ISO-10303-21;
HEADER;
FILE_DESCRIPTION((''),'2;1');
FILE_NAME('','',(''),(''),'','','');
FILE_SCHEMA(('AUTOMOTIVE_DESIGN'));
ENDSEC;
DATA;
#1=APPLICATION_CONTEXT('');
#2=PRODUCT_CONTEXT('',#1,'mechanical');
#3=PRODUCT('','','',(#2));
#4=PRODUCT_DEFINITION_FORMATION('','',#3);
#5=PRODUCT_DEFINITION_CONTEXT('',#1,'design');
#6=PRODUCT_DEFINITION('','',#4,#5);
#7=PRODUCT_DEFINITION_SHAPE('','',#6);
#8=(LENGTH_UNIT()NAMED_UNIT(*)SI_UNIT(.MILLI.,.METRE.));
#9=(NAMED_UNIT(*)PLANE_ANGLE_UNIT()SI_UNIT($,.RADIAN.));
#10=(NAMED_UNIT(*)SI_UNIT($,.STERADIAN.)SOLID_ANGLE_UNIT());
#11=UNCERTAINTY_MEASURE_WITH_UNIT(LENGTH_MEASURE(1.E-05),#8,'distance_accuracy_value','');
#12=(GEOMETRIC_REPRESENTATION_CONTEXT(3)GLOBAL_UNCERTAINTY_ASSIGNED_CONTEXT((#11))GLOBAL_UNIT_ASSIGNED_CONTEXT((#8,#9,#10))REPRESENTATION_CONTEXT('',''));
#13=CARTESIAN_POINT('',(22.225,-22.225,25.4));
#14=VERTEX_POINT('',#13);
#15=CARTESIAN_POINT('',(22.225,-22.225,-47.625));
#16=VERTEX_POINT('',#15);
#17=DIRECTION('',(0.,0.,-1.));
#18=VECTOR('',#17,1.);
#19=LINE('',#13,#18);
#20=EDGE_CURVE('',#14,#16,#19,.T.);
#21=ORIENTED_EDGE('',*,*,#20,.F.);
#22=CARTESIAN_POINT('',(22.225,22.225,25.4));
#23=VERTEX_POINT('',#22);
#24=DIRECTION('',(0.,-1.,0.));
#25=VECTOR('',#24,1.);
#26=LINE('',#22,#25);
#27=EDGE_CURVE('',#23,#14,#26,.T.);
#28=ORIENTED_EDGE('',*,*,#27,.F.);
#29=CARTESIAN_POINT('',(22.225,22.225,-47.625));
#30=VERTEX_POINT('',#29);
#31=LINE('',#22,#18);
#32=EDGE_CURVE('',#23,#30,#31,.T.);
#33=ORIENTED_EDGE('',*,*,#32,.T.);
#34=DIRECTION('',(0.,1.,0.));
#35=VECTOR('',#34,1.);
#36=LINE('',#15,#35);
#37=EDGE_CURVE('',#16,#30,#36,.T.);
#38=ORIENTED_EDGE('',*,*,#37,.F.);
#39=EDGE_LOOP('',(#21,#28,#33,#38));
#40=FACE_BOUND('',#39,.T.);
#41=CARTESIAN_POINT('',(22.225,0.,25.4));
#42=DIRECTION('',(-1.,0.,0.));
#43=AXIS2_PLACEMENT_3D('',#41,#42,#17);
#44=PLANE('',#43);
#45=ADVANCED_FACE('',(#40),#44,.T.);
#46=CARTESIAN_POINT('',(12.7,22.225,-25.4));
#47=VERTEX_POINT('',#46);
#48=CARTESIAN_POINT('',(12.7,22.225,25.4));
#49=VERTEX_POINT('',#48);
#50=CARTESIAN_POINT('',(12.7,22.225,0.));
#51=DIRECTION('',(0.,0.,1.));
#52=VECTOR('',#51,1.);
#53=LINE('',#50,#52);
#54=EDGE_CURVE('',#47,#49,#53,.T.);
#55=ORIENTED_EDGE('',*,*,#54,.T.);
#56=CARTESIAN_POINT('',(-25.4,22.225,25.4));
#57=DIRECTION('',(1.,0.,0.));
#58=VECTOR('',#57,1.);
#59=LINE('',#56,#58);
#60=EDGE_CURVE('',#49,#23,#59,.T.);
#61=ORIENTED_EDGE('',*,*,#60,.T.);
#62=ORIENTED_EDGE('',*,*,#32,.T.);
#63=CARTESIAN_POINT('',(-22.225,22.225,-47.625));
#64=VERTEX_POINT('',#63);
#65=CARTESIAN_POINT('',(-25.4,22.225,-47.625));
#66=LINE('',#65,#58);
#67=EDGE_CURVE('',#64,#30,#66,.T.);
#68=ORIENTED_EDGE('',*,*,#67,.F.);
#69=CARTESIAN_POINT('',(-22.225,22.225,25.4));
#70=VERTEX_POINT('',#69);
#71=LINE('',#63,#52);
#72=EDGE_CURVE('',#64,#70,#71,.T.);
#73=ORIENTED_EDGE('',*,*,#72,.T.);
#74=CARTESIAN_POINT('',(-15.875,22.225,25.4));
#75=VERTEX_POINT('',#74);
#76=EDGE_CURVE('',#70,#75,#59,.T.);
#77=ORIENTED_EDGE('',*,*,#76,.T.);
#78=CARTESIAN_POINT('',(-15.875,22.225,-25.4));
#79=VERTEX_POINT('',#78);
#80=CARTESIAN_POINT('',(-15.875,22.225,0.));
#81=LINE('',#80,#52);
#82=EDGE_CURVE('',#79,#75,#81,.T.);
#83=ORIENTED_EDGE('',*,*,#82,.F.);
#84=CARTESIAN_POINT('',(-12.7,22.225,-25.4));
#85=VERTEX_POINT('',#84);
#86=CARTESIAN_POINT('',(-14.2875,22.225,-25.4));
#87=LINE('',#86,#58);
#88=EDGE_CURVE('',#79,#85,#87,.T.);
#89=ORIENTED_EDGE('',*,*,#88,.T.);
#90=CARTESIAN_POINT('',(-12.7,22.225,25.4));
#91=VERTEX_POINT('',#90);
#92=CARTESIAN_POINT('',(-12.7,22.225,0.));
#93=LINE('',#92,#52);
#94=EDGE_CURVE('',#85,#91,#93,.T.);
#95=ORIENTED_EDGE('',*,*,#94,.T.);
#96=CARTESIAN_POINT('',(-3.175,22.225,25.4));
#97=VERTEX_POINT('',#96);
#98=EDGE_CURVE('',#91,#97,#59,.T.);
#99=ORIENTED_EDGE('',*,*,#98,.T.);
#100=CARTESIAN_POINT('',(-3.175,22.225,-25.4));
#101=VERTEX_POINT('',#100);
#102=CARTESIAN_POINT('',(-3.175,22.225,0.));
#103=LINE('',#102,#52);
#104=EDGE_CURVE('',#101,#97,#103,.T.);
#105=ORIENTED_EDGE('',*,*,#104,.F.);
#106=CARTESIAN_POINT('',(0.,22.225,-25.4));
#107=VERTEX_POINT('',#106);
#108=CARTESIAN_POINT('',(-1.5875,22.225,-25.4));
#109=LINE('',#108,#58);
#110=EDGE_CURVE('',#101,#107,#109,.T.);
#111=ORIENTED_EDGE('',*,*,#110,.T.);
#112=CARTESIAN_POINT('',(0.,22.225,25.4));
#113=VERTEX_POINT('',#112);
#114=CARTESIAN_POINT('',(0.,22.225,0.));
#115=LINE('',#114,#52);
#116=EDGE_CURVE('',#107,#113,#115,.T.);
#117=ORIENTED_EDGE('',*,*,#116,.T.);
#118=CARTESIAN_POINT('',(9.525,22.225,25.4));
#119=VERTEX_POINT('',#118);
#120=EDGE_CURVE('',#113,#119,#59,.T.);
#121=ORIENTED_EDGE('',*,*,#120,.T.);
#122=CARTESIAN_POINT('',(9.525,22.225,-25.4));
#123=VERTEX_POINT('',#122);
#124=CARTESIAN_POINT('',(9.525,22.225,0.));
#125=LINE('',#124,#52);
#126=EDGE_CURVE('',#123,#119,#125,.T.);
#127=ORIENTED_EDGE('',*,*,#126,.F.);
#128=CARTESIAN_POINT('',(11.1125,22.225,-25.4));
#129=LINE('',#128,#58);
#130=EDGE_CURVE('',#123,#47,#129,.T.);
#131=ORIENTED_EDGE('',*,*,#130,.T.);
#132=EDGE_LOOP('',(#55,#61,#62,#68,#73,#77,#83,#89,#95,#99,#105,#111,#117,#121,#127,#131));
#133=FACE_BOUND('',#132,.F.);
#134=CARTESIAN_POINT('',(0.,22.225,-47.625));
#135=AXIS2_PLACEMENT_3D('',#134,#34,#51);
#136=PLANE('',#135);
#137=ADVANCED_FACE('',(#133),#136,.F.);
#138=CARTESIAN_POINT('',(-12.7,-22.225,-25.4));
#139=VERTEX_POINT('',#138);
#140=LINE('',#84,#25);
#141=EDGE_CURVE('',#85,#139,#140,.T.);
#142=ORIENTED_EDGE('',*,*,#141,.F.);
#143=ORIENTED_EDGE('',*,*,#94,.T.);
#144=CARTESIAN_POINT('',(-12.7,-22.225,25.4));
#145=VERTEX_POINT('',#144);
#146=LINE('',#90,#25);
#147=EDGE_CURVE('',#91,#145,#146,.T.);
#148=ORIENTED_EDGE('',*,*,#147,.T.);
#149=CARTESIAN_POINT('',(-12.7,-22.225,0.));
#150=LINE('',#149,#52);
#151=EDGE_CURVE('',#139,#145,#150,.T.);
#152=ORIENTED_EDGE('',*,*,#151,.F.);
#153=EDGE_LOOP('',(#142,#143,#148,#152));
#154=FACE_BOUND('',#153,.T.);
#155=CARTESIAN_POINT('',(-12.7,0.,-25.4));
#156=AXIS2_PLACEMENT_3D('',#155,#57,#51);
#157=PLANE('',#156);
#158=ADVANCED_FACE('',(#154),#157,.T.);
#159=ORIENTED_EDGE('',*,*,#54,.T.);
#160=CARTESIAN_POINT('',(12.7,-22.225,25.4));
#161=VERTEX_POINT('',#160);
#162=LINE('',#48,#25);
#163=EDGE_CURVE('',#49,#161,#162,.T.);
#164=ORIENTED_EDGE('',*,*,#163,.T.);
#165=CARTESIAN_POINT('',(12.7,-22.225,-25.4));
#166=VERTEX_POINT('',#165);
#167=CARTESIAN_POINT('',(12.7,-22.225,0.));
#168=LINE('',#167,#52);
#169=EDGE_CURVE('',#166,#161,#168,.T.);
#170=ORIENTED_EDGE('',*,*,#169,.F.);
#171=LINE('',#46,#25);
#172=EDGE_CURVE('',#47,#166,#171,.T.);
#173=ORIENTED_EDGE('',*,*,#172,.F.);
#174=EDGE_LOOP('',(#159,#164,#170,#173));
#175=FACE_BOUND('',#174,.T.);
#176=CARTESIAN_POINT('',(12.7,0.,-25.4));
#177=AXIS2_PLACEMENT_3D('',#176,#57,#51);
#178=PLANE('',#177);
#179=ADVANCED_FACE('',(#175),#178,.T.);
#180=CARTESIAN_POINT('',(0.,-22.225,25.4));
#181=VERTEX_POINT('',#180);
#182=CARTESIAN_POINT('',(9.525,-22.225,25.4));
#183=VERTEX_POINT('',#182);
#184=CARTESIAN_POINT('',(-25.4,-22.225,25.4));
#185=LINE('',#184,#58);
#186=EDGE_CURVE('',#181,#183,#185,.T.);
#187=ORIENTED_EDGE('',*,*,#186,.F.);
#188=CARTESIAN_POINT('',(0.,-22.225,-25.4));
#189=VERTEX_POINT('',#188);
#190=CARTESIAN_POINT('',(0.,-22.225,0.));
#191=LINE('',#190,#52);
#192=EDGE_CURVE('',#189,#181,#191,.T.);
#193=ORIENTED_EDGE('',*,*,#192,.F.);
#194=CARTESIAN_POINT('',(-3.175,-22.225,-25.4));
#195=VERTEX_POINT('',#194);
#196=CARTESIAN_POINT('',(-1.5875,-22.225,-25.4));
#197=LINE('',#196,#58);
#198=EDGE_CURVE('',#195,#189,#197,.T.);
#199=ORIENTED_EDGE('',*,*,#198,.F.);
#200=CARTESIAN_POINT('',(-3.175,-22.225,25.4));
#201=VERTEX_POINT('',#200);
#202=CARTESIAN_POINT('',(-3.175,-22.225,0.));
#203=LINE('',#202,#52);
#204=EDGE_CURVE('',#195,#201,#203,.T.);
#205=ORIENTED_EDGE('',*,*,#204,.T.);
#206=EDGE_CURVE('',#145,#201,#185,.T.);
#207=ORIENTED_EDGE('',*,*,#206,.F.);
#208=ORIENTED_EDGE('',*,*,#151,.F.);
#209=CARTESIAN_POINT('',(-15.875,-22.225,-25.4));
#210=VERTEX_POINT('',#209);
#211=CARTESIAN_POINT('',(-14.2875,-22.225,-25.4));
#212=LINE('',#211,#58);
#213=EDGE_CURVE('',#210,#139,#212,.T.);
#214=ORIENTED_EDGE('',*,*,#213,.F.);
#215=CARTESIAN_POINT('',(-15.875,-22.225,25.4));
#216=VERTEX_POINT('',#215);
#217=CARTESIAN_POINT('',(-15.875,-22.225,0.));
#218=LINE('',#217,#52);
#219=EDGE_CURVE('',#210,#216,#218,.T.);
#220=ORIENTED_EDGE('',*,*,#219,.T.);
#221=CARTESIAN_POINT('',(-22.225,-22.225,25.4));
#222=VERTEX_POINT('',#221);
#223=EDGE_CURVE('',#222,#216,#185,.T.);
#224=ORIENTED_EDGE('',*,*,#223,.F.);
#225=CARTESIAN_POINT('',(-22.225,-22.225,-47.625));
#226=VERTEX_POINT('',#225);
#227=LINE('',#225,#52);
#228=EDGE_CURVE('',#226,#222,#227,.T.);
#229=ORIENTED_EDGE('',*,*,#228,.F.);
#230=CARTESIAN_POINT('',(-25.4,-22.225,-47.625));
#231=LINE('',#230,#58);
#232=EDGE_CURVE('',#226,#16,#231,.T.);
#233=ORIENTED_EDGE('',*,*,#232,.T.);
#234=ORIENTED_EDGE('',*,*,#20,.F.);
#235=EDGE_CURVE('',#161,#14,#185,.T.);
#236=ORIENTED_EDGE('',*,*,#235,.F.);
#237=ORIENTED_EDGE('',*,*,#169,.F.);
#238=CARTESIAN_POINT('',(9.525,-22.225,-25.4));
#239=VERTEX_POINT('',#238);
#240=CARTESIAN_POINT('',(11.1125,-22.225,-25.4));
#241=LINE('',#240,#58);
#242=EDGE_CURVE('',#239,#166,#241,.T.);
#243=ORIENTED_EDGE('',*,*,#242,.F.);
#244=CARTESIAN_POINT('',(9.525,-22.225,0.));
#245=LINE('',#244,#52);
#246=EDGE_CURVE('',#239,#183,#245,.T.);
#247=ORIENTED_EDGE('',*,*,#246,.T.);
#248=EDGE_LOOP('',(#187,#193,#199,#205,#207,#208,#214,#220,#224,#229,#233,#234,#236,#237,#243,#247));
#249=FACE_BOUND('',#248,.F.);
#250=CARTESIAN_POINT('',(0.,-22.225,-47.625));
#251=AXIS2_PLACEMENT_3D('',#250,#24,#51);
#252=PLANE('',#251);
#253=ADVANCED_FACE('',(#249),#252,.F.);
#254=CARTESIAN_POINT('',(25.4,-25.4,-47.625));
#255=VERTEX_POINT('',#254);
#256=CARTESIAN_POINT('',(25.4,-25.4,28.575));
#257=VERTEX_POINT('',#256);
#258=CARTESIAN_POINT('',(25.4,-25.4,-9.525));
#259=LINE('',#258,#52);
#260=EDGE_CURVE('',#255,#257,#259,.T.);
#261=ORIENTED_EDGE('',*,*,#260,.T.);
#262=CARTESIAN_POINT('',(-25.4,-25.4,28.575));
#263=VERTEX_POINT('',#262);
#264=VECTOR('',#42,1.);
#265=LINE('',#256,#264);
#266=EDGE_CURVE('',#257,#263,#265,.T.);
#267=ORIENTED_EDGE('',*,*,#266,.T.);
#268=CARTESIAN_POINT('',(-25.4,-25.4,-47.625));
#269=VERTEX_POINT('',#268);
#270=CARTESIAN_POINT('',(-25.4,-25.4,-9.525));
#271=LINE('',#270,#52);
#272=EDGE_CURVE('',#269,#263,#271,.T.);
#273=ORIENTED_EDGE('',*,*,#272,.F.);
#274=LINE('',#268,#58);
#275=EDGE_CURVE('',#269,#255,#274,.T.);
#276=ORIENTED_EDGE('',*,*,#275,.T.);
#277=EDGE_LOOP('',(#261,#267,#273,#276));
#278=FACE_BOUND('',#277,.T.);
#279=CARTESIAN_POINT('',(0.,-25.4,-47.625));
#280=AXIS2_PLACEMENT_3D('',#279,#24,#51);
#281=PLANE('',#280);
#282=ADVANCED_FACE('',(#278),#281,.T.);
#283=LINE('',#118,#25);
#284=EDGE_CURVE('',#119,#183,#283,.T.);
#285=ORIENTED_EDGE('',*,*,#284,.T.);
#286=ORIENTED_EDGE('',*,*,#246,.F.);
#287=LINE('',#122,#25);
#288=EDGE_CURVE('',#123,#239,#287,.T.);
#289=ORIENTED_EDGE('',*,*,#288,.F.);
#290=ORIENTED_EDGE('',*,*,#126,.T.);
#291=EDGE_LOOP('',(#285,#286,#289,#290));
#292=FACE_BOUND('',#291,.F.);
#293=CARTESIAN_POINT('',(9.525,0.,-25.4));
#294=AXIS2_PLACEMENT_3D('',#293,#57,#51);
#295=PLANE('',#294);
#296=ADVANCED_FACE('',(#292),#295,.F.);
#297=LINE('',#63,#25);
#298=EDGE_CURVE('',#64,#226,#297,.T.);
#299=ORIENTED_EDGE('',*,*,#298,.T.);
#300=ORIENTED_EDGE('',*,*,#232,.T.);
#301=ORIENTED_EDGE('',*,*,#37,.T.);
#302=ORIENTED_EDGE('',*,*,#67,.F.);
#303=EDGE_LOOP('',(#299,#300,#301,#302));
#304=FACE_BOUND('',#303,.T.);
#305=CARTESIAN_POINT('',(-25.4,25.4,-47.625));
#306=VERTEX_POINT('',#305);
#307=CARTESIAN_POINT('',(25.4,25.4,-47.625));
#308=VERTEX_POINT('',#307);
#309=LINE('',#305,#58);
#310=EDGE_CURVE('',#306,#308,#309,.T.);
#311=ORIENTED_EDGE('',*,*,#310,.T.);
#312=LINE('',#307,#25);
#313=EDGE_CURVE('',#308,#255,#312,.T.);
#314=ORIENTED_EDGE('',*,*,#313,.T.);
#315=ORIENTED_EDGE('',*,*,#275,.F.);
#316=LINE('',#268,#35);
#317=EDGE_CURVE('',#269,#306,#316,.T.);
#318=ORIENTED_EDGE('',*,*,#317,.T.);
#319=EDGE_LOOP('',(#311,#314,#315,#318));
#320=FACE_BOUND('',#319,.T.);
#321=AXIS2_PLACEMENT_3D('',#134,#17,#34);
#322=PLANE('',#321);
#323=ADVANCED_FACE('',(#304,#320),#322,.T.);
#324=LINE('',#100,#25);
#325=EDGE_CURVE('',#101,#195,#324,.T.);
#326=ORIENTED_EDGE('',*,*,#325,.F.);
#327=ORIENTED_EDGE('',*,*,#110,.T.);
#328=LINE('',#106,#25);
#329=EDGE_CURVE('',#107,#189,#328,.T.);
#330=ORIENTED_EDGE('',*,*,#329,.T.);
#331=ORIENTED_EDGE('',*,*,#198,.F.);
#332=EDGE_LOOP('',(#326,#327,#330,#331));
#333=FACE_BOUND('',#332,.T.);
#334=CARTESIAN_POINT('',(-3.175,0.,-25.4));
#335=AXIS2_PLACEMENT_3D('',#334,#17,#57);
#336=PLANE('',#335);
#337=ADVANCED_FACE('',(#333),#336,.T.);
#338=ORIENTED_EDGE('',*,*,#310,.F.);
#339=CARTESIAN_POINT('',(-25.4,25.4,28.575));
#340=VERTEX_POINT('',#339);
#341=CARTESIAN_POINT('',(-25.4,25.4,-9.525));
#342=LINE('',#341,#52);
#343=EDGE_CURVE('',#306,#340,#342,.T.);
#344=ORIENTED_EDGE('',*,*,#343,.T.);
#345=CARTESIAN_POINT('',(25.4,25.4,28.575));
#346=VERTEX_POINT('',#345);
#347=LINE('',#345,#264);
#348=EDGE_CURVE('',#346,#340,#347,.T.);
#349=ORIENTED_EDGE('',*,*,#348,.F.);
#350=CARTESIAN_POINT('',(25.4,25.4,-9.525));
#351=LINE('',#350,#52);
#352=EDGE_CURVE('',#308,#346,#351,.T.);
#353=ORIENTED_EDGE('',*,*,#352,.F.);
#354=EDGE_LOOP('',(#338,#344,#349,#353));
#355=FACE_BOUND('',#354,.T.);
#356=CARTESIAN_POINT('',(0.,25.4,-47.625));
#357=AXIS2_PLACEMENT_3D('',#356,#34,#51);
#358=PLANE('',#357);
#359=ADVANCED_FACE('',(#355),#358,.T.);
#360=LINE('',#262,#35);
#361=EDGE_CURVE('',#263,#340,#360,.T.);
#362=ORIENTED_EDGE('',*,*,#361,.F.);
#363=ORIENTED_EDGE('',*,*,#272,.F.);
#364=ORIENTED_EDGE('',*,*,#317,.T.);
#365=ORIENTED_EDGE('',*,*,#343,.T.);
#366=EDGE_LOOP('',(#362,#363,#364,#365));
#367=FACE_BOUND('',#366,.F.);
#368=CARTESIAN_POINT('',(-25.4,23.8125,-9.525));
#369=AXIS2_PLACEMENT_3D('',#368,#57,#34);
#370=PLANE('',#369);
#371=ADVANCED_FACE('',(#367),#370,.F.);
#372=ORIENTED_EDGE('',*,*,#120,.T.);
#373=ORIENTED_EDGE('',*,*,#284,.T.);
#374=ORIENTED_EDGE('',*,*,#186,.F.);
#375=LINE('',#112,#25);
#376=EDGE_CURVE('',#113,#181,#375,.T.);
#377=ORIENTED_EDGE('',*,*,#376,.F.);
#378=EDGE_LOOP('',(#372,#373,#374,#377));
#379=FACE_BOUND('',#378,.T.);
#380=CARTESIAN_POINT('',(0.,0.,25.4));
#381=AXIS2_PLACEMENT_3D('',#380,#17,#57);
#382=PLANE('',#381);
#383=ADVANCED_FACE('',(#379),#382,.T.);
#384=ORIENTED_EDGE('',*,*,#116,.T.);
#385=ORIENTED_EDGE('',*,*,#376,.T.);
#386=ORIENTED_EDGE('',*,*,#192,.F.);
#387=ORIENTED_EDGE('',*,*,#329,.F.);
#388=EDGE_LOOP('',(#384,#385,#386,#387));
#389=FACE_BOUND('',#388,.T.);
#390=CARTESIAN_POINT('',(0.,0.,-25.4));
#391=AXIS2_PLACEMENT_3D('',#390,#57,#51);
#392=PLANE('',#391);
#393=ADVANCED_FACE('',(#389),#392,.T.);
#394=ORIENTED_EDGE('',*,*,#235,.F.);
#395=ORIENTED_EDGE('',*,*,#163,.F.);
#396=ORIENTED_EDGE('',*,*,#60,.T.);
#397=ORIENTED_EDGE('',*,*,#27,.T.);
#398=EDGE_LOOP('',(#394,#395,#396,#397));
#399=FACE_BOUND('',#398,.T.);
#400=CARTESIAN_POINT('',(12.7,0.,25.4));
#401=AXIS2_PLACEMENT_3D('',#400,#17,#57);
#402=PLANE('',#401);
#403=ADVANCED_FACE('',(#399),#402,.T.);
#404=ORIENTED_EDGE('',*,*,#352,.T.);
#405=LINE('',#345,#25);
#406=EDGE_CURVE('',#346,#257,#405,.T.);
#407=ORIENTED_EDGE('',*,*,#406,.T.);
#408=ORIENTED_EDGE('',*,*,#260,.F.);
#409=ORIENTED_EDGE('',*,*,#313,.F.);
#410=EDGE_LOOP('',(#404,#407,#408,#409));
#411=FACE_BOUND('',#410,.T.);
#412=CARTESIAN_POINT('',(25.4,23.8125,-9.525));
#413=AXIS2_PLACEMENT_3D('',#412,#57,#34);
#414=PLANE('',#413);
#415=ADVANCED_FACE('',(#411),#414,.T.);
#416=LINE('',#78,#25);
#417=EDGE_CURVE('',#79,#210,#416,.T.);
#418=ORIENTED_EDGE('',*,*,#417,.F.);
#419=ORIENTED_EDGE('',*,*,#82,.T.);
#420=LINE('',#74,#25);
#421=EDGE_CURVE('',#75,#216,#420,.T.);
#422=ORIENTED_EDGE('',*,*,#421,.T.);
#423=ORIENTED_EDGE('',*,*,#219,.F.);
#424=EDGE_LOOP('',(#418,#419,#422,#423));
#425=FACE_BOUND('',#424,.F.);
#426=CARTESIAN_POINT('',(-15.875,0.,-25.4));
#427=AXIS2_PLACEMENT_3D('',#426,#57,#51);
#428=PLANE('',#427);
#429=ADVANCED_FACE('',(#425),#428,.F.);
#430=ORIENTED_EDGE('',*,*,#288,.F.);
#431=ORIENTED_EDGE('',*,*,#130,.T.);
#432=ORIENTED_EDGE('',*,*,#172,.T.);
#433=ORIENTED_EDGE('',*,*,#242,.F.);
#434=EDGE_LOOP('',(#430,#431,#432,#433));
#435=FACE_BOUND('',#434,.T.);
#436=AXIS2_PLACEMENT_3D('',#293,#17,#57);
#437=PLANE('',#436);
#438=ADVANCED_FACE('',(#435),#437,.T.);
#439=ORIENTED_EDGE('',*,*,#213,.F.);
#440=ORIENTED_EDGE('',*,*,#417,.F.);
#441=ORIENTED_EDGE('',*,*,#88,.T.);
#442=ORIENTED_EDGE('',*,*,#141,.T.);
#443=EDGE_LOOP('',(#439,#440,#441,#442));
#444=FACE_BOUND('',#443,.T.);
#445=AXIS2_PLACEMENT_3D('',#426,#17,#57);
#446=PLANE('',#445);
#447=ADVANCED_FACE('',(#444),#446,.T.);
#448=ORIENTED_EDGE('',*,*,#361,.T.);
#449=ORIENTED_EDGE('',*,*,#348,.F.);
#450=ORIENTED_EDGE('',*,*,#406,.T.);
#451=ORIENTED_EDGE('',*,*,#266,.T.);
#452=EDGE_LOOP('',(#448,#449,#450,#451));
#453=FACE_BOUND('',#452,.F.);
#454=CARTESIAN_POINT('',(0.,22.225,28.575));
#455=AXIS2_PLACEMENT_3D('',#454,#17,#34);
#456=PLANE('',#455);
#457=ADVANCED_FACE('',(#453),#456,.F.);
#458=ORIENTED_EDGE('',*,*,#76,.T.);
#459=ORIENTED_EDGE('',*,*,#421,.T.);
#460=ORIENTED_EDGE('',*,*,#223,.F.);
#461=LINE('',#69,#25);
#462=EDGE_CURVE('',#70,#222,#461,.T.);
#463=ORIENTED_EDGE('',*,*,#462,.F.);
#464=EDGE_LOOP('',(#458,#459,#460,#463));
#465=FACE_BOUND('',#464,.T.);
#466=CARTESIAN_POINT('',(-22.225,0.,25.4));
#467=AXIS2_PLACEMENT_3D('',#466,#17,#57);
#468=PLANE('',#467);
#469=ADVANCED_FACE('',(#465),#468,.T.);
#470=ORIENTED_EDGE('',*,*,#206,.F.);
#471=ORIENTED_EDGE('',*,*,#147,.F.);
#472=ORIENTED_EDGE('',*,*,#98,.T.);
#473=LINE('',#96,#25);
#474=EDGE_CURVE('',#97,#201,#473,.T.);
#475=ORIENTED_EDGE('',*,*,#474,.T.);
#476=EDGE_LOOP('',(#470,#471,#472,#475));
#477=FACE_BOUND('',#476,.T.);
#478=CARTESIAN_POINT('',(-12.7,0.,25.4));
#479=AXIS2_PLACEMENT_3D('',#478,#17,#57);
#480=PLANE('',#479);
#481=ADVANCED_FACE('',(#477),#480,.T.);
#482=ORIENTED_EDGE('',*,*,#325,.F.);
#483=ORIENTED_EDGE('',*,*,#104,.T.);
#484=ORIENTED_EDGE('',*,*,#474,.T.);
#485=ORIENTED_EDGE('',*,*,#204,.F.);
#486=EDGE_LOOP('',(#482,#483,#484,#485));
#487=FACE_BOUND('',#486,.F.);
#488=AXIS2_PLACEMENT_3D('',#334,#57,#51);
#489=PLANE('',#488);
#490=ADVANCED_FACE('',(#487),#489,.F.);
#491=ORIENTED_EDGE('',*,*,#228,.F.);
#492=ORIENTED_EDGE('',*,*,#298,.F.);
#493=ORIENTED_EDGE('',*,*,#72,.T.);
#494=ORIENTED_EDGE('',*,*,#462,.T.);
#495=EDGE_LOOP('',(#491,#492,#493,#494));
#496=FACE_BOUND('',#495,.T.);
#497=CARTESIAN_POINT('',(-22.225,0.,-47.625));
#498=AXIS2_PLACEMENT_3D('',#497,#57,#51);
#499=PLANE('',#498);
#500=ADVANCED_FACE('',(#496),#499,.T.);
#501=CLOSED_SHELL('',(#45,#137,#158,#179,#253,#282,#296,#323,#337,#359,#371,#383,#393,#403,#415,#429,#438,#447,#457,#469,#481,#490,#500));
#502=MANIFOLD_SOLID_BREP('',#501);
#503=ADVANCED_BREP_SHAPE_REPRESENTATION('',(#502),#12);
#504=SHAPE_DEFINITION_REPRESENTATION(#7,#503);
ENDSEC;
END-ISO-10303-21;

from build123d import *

# Parameters (mm, degrees)
F0_W     = 3.175
F0_H     = 50.8
F0_H_2   = 22.225
F1_DEPTH = 22.225
F2_W     = 3.175
F2_H     = 76.2
F3_DEPTH = 25.4


# Not quite as in the source:
# - a feature names something its author has since deleted; it is built from what else it names


with BuildPart() as f1:
    # F0 (on Front) → F1 (new body, symmetric)
    with BuildSketch(Plane.XZ):
        Polygon((-3.175, 25.4), (0, 25.4), (9.525, 25.4), (12.7, 25.4), (19.4811138548, 25.4), (22.225, 25.4), (25.4, 25.4), (25.4, 28.575), (-25.4, 28.575), (-25.4, 25.4), (-22.225, 25.4), (-15.875, 25.4), (-12.7, 25.4), align=None)
        with Locations((-23.8125, 0)):
            Rectangle(F0_W, F0_H)
        with Locations((-14.2875, 0)):
            Rectangle(F0_W, F0_H)
        with Locations((23.8125, 0)):
            Rectangle(F0_W, F0_H)
        with Locations((11.1125, 0)):
            Rectangle(F0_W, F0_H)
        with Locations((-1.5875, 0)):
            Rectangle(F0_W, F0_H)
        Polygon((25.4, -25.4), (22.225, -25.4), (22.225, -47.625), (25.4, -47.625), (25.4, -39.3581977692), (25.4, -38.6990095903), (25.4, -31.6347628832), align=None)
        with Locations((-23.8125, -36.5125)):
            Rectangle(F0_W, F0_H_2)
    extrude(amount=F1_DEPTH, both=True)

    # F2 (on Right) → F3 (join, symmetric)
    with BuildSketch(Plane.YZ):
        with Locations((-23.8125, -9.525)):
            Rectangle(F2_W, F2_H)
        with Locations((23.8125, -9.525)):
            Rectangle(F2_W, F2_H)
    extrude(amount=F3_DEPTH, both=True)


solid = f1.part
